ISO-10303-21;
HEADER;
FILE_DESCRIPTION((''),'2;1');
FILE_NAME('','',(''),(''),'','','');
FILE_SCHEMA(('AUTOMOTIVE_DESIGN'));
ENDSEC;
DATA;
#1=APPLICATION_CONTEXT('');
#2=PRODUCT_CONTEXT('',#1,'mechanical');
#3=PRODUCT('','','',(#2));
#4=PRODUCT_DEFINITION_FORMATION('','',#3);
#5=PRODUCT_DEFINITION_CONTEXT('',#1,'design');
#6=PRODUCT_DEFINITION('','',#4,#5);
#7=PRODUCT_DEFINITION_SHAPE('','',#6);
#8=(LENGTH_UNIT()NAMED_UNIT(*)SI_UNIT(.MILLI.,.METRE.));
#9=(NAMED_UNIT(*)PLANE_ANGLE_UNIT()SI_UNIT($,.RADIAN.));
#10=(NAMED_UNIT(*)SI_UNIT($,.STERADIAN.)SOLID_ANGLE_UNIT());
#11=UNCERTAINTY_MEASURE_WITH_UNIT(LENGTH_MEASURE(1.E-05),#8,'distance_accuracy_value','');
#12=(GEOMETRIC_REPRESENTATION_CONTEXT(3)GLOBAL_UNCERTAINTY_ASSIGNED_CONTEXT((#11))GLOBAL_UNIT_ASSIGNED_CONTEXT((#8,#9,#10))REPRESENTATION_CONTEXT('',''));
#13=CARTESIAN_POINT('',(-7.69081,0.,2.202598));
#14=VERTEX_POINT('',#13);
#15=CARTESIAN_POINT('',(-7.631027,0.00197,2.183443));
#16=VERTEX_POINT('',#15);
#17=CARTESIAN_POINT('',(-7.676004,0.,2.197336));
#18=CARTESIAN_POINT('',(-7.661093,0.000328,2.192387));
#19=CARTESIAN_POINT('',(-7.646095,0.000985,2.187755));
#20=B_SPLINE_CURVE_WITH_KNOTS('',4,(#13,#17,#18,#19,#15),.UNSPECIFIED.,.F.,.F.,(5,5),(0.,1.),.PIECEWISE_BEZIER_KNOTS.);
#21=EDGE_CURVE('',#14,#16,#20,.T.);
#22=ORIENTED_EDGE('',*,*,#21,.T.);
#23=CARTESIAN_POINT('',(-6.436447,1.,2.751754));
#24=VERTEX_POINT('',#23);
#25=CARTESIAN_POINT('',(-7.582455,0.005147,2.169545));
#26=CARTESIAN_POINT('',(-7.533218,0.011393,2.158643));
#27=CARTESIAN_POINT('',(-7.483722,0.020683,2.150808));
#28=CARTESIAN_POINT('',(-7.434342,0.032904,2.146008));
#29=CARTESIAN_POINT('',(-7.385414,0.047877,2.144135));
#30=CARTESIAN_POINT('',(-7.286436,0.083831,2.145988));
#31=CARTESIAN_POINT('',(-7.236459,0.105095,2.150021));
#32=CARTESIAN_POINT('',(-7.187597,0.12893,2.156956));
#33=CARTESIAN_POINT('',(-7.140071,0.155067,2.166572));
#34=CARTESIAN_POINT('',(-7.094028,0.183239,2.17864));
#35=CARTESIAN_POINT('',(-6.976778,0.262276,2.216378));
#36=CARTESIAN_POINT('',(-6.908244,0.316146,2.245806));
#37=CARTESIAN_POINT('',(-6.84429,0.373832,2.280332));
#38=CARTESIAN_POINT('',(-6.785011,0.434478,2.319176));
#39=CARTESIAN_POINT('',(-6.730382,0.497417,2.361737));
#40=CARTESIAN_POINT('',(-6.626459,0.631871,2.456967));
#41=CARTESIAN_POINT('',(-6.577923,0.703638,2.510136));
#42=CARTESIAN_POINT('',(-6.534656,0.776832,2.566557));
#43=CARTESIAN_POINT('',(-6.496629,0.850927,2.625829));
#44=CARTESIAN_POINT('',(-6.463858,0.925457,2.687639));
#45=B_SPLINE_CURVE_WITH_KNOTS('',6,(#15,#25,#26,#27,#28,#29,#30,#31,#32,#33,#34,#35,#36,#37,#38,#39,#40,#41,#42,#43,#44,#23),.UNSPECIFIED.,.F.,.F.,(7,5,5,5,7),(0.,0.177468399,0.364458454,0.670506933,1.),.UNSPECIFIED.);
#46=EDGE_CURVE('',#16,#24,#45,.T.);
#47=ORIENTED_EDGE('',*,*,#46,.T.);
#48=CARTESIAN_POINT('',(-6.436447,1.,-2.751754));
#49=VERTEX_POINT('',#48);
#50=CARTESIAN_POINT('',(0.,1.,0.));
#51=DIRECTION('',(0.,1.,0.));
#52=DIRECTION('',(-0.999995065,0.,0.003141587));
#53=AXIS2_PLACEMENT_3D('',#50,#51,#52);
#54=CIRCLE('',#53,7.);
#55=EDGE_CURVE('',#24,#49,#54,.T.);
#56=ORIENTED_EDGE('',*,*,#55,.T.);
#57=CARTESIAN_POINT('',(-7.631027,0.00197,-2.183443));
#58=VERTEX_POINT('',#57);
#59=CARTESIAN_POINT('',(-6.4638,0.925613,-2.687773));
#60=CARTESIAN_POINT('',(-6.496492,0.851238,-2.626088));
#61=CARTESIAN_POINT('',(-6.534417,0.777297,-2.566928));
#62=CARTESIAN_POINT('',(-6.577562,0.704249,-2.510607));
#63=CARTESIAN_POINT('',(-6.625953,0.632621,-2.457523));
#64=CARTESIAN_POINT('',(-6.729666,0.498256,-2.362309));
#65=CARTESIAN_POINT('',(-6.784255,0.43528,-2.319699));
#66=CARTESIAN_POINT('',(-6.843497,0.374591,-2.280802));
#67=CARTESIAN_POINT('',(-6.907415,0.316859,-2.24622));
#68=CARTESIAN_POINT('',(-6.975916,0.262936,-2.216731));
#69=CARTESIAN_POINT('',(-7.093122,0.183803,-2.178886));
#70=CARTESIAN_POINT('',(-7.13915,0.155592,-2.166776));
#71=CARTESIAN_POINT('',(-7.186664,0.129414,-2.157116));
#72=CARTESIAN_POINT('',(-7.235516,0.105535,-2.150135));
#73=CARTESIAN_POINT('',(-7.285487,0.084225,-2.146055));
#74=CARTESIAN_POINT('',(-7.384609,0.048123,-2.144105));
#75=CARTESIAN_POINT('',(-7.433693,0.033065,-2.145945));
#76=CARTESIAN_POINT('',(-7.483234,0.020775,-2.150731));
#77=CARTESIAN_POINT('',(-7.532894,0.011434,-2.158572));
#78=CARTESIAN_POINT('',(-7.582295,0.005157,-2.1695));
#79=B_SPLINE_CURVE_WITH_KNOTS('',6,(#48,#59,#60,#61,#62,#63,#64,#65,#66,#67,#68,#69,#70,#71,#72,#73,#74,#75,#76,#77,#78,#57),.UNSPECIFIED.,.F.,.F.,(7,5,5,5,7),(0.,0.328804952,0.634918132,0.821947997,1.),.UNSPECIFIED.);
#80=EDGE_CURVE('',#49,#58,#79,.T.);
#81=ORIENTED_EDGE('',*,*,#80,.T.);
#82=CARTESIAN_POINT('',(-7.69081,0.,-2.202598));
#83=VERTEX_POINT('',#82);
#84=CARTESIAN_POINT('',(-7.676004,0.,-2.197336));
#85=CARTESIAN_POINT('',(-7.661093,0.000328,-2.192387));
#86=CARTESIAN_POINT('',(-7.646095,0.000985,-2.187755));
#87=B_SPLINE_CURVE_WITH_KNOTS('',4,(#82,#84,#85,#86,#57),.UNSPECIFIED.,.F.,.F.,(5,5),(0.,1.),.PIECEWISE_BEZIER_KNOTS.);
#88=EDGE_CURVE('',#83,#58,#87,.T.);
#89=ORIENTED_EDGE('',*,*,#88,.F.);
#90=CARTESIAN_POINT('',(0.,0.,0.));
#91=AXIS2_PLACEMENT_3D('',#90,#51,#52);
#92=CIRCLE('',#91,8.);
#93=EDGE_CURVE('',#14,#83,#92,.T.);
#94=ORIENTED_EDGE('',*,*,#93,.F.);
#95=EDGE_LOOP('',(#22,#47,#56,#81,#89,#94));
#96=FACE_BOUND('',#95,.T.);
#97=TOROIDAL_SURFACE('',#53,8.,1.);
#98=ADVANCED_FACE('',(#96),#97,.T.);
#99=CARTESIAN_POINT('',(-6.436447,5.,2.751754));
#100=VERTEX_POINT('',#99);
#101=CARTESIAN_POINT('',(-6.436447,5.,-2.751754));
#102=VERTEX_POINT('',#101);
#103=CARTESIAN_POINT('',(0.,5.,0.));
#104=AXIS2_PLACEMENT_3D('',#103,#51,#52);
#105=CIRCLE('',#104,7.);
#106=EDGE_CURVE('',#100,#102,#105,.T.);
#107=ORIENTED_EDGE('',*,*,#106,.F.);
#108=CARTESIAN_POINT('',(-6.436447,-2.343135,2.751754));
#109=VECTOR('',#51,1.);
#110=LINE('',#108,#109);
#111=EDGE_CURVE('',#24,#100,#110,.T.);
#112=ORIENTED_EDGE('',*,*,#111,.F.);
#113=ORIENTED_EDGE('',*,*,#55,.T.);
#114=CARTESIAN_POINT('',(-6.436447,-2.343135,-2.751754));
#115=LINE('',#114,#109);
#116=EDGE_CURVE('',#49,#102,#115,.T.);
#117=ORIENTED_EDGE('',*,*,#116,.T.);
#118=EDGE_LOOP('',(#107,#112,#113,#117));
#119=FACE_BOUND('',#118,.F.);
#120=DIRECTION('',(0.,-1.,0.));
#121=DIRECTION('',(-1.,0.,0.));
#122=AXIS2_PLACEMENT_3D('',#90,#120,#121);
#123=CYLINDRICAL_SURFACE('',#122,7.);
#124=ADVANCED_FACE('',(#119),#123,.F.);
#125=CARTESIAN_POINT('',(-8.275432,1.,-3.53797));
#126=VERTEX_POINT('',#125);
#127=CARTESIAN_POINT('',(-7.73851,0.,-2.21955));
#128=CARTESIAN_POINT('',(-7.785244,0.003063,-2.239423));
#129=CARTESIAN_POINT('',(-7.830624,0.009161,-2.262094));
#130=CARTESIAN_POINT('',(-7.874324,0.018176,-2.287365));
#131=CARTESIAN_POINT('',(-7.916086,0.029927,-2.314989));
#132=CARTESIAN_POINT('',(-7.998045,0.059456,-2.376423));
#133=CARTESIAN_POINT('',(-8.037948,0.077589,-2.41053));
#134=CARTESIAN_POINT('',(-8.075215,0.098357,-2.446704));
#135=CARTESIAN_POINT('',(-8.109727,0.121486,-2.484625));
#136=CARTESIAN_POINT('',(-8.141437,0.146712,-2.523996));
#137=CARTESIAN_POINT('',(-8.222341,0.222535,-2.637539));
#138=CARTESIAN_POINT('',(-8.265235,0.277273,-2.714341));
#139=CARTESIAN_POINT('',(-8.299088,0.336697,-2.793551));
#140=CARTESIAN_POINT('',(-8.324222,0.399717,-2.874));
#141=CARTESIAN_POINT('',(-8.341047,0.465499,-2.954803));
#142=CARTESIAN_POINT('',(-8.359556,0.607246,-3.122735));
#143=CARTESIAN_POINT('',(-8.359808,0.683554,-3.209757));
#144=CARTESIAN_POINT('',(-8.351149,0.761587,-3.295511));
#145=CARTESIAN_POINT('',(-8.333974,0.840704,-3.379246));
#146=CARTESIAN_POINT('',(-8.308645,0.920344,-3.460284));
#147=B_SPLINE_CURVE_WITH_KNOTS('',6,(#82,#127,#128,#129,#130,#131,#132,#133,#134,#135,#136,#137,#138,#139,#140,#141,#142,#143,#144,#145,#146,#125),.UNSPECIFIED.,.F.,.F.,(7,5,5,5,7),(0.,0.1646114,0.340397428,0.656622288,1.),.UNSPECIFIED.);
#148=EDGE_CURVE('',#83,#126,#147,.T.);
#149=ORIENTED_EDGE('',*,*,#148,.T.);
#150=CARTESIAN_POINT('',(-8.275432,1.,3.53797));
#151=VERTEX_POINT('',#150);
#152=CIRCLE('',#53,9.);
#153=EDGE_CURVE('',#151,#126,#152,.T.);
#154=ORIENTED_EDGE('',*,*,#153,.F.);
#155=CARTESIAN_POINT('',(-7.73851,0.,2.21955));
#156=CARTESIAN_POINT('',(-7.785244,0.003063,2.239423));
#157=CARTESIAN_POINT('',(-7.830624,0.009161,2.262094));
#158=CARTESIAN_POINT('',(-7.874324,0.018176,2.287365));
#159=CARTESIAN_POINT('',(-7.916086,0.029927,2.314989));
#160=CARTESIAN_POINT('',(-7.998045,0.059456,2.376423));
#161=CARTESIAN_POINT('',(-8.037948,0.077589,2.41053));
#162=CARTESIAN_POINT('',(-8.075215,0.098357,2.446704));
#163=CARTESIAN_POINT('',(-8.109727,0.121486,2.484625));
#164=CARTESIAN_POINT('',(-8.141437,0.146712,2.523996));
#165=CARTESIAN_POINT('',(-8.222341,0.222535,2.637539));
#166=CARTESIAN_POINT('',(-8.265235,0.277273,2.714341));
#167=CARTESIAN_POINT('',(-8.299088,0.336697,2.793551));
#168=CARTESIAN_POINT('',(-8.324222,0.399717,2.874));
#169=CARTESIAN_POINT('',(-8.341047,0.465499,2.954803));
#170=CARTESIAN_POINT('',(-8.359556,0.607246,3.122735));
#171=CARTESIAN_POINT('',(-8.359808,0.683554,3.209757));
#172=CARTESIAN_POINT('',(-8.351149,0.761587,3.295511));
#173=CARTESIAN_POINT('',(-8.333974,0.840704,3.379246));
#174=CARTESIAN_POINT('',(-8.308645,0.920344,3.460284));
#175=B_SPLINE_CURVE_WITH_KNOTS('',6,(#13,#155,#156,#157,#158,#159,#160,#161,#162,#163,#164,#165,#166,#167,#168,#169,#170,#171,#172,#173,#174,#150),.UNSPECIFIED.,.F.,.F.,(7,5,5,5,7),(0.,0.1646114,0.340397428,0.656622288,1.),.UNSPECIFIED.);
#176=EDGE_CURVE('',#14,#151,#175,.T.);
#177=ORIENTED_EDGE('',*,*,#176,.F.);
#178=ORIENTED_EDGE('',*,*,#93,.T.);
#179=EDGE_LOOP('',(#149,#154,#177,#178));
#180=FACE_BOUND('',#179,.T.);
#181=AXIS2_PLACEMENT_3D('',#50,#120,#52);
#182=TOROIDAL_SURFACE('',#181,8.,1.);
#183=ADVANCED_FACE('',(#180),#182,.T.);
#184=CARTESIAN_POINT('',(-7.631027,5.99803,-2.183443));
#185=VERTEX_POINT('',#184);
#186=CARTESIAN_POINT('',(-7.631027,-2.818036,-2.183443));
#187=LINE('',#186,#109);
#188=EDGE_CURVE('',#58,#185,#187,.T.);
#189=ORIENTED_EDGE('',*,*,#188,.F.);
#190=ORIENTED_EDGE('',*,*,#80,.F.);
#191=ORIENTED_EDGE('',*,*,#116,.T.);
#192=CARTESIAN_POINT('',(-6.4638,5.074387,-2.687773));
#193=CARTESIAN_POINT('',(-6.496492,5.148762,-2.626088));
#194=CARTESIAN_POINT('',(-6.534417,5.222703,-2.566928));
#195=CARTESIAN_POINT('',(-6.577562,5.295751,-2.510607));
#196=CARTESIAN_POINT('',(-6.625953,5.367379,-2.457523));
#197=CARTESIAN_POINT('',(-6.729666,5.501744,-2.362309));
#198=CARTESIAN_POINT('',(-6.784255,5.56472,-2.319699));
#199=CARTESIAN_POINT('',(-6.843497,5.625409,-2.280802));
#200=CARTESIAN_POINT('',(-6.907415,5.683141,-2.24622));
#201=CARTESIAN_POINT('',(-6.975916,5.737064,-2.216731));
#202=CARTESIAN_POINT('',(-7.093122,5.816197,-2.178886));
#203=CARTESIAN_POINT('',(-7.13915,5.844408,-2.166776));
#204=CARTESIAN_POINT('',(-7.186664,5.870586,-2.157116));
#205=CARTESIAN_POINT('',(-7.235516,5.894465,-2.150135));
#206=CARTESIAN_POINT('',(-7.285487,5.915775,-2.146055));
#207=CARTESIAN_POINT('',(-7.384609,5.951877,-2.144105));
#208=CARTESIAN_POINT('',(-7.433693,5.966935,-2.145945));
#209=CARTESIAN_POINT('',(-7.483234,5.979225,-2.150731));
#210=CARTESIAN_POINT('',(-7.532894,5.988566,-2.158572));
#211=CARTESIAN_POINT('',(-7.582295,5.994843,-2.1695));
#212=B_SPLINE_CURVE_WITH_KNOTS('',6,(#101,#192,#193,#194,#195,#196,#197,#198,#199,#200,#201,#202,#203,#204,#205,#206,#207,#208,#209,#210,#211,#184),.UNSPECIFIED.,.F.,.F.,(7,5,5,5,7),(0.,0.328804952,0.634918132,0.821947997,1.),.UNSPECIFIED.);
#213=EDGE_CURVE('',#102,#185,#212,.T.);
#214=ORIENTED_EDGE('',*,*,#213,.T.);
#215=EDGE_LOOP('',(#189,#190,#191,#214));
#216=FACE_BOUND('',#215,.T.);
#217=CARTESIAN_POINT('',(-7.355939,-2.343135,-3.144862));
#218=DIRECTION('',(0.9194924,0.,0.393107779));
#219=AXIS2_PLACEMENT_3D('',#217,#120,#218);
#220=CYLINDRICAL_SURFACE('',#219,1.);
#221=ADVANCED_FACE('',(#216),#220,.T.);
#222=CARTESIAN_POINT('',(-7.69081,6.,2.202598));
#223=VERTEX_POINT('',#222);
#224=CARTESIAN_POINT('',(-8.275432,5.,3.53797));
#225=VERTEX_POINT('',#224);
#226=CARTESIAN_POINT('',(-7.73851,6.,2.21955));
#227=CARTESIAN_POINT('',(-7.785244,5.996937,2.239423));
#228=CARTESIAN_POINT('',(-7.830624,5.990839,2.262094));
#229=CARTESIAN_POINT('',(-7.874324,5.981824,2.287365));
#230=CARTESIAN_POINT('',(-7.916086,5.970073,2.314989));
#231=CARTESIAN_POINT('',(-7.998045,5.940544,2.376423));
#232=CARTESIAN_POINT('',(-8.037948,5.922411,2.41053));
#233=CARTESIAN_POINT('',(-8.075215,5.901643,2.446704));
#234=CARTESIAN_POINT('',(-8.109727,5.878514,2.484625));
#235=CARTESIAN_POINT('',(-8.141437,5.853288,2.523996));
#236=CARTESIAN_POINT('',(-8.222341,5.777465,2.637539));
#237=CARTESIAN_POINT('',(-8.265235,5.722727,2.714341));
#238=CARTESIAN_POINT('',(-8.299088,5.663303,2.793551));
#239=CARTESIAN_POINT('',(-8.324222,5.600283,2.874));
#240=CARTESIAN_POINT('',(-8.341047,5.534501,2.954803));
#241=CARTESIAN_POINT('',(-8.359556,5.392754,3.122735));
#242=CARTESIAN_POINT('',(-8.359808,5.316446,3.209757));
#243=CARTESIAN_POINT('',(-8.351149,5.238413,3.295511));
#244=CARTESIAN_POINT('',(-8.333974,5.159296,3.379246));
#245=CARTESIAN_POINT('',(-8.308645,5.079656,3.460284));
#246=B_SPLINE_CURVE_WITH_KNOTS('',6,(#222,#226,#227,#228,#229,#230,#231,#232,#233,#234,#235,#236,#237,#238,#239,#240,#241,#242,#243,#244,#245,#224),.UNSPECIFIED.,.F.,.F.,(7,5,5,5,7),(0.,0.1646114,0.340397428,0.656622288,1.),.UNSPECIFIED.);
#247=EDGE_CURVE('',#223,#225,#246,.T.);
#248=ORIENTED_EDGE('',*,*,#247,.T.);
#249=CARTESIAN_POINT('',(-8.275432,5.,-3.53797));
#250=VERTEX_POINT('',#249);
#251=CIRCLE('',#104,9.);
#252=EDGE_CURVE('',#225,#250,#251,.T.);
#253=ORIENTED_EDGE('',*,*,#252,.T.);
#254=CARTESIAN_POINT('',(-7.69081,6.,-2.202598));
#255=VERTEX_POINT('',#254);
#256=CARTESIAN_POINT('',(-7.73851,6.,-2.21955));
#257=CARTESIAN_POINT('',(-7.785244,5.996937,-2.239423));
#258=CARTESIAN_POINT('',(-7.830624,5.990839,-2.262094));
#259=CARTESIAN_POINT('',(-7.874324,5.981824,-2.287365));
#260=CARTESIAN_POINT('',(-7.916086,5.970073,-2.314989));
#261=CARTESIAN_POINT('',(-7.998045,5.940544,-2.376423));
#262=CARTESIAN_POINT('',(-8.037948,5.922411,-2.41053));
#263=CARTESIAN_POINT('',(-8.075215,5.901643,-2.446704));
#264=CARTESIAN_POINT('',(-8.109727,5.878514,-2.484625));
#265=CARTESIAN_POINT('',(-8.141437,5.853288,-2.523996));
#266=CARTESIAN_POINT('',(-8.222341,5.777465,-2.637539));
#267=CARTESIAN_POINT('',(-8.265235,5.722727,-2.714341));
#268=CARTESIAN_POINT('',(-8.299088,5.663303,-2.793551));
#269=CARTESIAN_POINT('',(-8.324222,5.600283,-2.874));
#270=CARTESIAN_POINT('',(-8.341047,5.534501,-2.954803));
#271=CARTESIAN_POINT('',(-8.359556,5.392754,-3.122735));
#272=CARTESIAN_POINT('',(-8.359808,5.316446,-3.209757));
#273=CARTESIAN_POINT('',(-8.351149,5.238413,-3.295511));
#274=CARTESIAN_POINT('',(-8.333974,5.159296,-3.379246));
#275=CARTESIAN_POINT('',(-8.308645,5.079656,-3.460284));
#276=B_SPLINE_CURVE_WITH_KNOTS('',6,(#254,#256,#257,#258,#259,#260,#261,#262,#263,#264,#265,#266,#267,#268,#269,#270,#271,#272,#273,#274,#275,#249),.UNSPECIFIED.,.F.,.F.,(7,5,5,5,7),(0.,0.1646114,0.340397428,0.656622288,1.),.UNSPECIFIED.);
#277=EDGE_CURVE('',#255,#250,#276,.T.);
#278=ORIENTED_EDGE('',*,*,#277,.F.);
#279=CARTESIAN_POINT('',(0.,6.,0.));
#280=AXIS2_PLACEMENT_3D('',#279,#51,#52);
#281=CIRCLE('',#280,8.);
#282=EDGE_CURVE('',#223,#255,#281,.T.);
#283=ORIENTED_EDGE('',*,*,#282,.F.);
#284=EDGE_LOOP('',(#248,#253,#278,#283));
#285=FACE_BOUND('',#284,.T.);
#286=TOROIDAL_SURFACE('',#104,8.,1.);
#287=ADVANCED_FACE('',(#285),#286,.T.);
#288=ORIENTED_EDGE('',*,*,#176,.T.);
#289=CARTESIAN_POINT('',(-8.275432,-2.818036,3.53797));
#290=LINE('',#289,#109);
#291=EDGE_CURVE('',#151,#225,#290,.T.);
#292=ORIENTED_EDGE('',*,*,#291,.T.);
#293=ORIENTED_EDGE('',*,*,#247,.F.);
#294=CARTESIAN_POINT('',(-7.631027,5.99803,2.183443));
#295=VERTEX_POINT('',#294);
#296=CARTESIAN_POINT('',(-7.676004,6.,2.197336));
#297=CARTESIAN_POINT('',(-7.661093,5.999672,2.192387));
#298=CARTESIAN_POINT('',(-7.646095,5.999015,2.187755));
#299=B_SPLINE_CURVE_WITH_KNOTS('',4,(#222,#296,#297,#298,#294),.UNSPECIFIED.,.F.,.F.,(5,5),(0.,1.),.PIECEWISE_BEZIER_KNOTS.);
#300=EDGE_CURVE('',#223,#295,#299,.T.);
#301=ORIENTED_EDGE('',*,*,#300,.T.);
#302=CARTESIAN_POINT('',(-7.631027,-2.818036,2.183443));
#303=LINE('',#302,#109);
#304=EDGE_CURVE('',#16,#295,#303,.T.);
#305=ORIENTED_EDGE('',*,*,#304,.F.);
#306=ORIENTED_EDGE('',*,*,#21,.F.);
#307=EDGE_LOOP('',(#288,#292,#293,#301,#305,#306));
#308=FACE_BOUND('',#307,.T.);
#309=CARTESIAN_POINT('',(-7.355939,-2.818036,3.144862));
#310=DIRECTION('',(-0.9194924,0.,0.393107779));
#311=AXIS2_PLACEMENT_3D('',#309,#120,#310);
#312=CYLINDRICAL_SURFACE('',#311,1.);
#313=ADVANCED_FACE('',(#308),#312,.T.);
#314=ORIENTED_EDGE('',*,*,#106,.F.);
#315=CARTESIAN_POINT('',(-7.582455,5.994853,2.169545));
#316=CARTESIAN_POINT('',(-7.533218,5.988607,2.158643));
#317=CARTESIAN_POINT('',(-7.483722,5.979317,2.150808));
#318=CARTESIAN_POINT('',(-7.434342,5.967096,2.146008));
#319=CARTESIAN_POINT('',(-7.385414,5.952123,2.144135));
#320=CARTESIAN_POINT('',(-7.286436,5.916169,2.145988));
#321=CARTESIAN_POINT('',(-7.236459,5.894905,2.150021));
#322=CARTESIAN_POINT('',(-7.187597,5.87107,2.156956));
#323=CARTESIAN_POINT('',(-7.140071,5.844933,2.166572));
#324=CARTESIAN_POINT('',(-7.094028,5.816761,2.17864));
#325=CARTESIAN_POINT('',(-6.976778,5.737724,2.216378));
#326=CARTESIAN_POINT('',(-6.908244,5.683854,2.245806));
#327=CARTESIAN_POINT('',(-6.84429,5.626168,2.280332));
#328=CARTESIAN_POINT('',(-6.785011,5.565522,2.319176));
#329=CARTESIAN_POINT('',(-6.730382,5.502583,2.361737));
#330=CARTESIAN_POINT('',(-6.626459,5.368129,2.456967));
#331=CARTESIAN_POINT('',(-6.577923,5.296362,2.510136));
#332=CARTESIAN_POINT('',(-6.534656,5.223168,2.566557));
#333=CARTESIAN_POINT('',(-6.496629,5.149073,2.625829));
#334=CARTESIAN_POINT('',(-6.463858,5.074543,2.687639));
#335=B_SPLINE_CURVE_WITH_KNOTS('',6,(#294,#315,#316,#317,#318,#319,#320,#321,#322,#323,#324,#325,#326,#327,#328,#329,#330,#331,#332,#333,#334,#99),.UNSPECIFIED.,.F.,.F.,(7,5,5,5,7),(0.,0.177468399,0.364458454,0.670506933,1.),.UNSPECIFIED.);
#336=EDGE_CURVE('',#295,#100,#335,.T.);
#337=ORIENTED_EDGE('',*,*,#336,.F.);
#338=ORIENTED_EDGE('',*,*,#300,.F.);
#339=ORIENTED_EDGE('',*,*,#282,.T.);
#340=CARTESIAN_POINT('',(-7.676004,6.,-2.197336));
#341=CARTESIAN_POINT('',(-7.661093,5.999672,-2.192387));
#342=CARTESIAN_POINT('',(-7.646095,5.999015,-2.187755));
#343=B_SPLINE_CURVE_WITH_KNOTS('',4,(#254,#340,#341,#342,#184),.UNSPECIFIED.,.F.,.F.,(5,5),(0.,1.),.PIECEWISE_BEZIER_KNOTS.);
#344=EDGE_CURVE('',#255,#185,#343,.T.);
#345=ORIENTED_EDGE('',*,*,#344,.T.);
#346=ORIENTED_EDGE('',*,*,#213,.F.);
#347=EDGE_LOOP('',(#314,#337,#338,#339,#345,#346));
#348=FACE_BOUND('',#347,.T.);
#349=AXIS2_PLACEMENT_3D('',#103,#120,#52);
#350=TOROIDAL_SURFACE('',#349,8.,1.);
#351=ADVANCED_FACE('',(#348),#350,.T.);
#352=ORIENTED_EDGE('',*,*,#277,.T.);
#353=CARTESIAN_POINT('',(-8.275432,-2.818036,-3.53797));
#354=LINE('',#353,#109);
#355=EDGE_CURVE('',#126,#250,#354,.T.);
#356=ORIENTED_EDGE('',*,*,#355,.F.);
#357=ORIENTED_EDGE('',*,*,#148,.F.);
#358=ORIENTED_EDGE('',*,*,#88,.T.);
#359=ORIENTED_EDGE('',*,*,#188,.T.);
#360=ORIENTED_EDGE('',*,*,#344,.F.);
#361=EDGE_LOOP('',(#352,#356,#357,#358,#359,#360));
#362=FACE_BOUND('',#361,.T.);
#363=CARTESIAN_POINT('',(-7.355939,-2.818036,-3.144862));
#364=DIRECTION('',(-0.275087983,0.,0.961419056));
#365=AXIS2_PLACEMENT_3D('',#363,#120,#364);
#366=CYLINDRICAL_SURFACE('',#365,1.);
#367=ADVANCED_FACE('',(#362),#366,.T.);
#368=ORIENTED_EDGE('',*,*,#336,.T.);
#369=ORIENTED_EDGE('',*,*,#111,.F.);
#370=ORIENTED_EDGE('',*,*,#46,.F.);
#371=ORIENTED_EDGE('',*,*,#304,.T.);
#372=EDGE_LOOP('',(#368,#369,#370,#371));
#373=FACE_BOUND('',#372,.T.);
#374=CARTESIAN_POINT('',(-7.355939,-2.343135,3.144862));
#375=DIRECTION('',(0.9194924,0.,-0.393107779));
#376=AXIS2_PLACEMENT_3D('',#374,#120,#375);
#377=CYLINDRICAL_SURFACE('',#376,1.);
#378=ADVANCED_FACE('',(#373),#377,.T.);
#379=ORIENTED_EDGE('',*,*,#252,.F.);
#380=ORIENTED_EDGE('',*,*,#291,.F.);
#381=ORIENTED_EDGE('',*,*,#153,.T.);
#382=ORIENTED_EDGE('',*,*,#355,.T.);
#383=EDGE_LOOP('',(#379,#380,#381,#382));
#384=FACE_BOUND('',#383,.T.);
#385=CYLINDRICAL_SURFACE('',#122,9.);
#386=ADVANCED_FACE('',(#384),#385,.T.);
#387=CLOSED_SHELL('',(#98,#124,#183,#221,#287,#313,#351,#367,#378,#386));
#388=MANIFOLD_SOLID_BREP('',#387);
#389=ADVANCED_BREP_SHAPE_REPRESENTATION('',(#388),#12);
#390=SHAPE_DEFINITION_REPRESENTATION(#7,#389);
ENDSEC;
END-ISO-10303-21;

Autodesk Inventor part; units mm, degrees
ref_plane "YZ Plane" through (0, 0, 0) normal (1, 0, 0) x (0, 1, 0)
ref_plane "XZ Plane" through (0, 0, 0) normal (0, 1, 0) x (-1, 0, 0)
ref_plane "XY Plane" through (0, 0, 0) normal (0, 0, 1) x (1, 0, 0)
sketch "Sketch1" plane through (0, 0, 0) normal (0, 1, 0) x (-1, 0, 0)
  circle A0 centre (0, 0) radius 7
  circle A1 centre (0, 0) radius 9
  line L0 (7, 0) -> (9, 0)
  line L1 (9, 0) -> (8.6528, -2.4758)
  line L2 (9, 0) -> (8.6528, 2.4758)
  line L3 (8.6528, 2.4758) -> (0, 0)
  line L4 (0, 0) -> (8.6528, -2.4758)
  point P0 (6.7299, -1.9256)
  point P1 (6.7299, 1.9256)
  dimension "d0" = 14
  dimension "d1" = 18
  dimension "d2" = 2.5
  dimension "d3" = 2.5
extrude "Extrusion1" add sketch "Sketch1" along normal blind 6 contours A0 L4 A1 L3
fillet "Fillet1" radius 1 8 edges at (7, 0, 0) (9, 0, 0) (9, 6, 0) (7, 6, 0) (-8.6528, 3, -2.4758) (-6.7299, 3, -1.9256) (-8.6528, 3, 2.4758) (-6.7299, 3, 1.9256)
properties part number "CableRing"
